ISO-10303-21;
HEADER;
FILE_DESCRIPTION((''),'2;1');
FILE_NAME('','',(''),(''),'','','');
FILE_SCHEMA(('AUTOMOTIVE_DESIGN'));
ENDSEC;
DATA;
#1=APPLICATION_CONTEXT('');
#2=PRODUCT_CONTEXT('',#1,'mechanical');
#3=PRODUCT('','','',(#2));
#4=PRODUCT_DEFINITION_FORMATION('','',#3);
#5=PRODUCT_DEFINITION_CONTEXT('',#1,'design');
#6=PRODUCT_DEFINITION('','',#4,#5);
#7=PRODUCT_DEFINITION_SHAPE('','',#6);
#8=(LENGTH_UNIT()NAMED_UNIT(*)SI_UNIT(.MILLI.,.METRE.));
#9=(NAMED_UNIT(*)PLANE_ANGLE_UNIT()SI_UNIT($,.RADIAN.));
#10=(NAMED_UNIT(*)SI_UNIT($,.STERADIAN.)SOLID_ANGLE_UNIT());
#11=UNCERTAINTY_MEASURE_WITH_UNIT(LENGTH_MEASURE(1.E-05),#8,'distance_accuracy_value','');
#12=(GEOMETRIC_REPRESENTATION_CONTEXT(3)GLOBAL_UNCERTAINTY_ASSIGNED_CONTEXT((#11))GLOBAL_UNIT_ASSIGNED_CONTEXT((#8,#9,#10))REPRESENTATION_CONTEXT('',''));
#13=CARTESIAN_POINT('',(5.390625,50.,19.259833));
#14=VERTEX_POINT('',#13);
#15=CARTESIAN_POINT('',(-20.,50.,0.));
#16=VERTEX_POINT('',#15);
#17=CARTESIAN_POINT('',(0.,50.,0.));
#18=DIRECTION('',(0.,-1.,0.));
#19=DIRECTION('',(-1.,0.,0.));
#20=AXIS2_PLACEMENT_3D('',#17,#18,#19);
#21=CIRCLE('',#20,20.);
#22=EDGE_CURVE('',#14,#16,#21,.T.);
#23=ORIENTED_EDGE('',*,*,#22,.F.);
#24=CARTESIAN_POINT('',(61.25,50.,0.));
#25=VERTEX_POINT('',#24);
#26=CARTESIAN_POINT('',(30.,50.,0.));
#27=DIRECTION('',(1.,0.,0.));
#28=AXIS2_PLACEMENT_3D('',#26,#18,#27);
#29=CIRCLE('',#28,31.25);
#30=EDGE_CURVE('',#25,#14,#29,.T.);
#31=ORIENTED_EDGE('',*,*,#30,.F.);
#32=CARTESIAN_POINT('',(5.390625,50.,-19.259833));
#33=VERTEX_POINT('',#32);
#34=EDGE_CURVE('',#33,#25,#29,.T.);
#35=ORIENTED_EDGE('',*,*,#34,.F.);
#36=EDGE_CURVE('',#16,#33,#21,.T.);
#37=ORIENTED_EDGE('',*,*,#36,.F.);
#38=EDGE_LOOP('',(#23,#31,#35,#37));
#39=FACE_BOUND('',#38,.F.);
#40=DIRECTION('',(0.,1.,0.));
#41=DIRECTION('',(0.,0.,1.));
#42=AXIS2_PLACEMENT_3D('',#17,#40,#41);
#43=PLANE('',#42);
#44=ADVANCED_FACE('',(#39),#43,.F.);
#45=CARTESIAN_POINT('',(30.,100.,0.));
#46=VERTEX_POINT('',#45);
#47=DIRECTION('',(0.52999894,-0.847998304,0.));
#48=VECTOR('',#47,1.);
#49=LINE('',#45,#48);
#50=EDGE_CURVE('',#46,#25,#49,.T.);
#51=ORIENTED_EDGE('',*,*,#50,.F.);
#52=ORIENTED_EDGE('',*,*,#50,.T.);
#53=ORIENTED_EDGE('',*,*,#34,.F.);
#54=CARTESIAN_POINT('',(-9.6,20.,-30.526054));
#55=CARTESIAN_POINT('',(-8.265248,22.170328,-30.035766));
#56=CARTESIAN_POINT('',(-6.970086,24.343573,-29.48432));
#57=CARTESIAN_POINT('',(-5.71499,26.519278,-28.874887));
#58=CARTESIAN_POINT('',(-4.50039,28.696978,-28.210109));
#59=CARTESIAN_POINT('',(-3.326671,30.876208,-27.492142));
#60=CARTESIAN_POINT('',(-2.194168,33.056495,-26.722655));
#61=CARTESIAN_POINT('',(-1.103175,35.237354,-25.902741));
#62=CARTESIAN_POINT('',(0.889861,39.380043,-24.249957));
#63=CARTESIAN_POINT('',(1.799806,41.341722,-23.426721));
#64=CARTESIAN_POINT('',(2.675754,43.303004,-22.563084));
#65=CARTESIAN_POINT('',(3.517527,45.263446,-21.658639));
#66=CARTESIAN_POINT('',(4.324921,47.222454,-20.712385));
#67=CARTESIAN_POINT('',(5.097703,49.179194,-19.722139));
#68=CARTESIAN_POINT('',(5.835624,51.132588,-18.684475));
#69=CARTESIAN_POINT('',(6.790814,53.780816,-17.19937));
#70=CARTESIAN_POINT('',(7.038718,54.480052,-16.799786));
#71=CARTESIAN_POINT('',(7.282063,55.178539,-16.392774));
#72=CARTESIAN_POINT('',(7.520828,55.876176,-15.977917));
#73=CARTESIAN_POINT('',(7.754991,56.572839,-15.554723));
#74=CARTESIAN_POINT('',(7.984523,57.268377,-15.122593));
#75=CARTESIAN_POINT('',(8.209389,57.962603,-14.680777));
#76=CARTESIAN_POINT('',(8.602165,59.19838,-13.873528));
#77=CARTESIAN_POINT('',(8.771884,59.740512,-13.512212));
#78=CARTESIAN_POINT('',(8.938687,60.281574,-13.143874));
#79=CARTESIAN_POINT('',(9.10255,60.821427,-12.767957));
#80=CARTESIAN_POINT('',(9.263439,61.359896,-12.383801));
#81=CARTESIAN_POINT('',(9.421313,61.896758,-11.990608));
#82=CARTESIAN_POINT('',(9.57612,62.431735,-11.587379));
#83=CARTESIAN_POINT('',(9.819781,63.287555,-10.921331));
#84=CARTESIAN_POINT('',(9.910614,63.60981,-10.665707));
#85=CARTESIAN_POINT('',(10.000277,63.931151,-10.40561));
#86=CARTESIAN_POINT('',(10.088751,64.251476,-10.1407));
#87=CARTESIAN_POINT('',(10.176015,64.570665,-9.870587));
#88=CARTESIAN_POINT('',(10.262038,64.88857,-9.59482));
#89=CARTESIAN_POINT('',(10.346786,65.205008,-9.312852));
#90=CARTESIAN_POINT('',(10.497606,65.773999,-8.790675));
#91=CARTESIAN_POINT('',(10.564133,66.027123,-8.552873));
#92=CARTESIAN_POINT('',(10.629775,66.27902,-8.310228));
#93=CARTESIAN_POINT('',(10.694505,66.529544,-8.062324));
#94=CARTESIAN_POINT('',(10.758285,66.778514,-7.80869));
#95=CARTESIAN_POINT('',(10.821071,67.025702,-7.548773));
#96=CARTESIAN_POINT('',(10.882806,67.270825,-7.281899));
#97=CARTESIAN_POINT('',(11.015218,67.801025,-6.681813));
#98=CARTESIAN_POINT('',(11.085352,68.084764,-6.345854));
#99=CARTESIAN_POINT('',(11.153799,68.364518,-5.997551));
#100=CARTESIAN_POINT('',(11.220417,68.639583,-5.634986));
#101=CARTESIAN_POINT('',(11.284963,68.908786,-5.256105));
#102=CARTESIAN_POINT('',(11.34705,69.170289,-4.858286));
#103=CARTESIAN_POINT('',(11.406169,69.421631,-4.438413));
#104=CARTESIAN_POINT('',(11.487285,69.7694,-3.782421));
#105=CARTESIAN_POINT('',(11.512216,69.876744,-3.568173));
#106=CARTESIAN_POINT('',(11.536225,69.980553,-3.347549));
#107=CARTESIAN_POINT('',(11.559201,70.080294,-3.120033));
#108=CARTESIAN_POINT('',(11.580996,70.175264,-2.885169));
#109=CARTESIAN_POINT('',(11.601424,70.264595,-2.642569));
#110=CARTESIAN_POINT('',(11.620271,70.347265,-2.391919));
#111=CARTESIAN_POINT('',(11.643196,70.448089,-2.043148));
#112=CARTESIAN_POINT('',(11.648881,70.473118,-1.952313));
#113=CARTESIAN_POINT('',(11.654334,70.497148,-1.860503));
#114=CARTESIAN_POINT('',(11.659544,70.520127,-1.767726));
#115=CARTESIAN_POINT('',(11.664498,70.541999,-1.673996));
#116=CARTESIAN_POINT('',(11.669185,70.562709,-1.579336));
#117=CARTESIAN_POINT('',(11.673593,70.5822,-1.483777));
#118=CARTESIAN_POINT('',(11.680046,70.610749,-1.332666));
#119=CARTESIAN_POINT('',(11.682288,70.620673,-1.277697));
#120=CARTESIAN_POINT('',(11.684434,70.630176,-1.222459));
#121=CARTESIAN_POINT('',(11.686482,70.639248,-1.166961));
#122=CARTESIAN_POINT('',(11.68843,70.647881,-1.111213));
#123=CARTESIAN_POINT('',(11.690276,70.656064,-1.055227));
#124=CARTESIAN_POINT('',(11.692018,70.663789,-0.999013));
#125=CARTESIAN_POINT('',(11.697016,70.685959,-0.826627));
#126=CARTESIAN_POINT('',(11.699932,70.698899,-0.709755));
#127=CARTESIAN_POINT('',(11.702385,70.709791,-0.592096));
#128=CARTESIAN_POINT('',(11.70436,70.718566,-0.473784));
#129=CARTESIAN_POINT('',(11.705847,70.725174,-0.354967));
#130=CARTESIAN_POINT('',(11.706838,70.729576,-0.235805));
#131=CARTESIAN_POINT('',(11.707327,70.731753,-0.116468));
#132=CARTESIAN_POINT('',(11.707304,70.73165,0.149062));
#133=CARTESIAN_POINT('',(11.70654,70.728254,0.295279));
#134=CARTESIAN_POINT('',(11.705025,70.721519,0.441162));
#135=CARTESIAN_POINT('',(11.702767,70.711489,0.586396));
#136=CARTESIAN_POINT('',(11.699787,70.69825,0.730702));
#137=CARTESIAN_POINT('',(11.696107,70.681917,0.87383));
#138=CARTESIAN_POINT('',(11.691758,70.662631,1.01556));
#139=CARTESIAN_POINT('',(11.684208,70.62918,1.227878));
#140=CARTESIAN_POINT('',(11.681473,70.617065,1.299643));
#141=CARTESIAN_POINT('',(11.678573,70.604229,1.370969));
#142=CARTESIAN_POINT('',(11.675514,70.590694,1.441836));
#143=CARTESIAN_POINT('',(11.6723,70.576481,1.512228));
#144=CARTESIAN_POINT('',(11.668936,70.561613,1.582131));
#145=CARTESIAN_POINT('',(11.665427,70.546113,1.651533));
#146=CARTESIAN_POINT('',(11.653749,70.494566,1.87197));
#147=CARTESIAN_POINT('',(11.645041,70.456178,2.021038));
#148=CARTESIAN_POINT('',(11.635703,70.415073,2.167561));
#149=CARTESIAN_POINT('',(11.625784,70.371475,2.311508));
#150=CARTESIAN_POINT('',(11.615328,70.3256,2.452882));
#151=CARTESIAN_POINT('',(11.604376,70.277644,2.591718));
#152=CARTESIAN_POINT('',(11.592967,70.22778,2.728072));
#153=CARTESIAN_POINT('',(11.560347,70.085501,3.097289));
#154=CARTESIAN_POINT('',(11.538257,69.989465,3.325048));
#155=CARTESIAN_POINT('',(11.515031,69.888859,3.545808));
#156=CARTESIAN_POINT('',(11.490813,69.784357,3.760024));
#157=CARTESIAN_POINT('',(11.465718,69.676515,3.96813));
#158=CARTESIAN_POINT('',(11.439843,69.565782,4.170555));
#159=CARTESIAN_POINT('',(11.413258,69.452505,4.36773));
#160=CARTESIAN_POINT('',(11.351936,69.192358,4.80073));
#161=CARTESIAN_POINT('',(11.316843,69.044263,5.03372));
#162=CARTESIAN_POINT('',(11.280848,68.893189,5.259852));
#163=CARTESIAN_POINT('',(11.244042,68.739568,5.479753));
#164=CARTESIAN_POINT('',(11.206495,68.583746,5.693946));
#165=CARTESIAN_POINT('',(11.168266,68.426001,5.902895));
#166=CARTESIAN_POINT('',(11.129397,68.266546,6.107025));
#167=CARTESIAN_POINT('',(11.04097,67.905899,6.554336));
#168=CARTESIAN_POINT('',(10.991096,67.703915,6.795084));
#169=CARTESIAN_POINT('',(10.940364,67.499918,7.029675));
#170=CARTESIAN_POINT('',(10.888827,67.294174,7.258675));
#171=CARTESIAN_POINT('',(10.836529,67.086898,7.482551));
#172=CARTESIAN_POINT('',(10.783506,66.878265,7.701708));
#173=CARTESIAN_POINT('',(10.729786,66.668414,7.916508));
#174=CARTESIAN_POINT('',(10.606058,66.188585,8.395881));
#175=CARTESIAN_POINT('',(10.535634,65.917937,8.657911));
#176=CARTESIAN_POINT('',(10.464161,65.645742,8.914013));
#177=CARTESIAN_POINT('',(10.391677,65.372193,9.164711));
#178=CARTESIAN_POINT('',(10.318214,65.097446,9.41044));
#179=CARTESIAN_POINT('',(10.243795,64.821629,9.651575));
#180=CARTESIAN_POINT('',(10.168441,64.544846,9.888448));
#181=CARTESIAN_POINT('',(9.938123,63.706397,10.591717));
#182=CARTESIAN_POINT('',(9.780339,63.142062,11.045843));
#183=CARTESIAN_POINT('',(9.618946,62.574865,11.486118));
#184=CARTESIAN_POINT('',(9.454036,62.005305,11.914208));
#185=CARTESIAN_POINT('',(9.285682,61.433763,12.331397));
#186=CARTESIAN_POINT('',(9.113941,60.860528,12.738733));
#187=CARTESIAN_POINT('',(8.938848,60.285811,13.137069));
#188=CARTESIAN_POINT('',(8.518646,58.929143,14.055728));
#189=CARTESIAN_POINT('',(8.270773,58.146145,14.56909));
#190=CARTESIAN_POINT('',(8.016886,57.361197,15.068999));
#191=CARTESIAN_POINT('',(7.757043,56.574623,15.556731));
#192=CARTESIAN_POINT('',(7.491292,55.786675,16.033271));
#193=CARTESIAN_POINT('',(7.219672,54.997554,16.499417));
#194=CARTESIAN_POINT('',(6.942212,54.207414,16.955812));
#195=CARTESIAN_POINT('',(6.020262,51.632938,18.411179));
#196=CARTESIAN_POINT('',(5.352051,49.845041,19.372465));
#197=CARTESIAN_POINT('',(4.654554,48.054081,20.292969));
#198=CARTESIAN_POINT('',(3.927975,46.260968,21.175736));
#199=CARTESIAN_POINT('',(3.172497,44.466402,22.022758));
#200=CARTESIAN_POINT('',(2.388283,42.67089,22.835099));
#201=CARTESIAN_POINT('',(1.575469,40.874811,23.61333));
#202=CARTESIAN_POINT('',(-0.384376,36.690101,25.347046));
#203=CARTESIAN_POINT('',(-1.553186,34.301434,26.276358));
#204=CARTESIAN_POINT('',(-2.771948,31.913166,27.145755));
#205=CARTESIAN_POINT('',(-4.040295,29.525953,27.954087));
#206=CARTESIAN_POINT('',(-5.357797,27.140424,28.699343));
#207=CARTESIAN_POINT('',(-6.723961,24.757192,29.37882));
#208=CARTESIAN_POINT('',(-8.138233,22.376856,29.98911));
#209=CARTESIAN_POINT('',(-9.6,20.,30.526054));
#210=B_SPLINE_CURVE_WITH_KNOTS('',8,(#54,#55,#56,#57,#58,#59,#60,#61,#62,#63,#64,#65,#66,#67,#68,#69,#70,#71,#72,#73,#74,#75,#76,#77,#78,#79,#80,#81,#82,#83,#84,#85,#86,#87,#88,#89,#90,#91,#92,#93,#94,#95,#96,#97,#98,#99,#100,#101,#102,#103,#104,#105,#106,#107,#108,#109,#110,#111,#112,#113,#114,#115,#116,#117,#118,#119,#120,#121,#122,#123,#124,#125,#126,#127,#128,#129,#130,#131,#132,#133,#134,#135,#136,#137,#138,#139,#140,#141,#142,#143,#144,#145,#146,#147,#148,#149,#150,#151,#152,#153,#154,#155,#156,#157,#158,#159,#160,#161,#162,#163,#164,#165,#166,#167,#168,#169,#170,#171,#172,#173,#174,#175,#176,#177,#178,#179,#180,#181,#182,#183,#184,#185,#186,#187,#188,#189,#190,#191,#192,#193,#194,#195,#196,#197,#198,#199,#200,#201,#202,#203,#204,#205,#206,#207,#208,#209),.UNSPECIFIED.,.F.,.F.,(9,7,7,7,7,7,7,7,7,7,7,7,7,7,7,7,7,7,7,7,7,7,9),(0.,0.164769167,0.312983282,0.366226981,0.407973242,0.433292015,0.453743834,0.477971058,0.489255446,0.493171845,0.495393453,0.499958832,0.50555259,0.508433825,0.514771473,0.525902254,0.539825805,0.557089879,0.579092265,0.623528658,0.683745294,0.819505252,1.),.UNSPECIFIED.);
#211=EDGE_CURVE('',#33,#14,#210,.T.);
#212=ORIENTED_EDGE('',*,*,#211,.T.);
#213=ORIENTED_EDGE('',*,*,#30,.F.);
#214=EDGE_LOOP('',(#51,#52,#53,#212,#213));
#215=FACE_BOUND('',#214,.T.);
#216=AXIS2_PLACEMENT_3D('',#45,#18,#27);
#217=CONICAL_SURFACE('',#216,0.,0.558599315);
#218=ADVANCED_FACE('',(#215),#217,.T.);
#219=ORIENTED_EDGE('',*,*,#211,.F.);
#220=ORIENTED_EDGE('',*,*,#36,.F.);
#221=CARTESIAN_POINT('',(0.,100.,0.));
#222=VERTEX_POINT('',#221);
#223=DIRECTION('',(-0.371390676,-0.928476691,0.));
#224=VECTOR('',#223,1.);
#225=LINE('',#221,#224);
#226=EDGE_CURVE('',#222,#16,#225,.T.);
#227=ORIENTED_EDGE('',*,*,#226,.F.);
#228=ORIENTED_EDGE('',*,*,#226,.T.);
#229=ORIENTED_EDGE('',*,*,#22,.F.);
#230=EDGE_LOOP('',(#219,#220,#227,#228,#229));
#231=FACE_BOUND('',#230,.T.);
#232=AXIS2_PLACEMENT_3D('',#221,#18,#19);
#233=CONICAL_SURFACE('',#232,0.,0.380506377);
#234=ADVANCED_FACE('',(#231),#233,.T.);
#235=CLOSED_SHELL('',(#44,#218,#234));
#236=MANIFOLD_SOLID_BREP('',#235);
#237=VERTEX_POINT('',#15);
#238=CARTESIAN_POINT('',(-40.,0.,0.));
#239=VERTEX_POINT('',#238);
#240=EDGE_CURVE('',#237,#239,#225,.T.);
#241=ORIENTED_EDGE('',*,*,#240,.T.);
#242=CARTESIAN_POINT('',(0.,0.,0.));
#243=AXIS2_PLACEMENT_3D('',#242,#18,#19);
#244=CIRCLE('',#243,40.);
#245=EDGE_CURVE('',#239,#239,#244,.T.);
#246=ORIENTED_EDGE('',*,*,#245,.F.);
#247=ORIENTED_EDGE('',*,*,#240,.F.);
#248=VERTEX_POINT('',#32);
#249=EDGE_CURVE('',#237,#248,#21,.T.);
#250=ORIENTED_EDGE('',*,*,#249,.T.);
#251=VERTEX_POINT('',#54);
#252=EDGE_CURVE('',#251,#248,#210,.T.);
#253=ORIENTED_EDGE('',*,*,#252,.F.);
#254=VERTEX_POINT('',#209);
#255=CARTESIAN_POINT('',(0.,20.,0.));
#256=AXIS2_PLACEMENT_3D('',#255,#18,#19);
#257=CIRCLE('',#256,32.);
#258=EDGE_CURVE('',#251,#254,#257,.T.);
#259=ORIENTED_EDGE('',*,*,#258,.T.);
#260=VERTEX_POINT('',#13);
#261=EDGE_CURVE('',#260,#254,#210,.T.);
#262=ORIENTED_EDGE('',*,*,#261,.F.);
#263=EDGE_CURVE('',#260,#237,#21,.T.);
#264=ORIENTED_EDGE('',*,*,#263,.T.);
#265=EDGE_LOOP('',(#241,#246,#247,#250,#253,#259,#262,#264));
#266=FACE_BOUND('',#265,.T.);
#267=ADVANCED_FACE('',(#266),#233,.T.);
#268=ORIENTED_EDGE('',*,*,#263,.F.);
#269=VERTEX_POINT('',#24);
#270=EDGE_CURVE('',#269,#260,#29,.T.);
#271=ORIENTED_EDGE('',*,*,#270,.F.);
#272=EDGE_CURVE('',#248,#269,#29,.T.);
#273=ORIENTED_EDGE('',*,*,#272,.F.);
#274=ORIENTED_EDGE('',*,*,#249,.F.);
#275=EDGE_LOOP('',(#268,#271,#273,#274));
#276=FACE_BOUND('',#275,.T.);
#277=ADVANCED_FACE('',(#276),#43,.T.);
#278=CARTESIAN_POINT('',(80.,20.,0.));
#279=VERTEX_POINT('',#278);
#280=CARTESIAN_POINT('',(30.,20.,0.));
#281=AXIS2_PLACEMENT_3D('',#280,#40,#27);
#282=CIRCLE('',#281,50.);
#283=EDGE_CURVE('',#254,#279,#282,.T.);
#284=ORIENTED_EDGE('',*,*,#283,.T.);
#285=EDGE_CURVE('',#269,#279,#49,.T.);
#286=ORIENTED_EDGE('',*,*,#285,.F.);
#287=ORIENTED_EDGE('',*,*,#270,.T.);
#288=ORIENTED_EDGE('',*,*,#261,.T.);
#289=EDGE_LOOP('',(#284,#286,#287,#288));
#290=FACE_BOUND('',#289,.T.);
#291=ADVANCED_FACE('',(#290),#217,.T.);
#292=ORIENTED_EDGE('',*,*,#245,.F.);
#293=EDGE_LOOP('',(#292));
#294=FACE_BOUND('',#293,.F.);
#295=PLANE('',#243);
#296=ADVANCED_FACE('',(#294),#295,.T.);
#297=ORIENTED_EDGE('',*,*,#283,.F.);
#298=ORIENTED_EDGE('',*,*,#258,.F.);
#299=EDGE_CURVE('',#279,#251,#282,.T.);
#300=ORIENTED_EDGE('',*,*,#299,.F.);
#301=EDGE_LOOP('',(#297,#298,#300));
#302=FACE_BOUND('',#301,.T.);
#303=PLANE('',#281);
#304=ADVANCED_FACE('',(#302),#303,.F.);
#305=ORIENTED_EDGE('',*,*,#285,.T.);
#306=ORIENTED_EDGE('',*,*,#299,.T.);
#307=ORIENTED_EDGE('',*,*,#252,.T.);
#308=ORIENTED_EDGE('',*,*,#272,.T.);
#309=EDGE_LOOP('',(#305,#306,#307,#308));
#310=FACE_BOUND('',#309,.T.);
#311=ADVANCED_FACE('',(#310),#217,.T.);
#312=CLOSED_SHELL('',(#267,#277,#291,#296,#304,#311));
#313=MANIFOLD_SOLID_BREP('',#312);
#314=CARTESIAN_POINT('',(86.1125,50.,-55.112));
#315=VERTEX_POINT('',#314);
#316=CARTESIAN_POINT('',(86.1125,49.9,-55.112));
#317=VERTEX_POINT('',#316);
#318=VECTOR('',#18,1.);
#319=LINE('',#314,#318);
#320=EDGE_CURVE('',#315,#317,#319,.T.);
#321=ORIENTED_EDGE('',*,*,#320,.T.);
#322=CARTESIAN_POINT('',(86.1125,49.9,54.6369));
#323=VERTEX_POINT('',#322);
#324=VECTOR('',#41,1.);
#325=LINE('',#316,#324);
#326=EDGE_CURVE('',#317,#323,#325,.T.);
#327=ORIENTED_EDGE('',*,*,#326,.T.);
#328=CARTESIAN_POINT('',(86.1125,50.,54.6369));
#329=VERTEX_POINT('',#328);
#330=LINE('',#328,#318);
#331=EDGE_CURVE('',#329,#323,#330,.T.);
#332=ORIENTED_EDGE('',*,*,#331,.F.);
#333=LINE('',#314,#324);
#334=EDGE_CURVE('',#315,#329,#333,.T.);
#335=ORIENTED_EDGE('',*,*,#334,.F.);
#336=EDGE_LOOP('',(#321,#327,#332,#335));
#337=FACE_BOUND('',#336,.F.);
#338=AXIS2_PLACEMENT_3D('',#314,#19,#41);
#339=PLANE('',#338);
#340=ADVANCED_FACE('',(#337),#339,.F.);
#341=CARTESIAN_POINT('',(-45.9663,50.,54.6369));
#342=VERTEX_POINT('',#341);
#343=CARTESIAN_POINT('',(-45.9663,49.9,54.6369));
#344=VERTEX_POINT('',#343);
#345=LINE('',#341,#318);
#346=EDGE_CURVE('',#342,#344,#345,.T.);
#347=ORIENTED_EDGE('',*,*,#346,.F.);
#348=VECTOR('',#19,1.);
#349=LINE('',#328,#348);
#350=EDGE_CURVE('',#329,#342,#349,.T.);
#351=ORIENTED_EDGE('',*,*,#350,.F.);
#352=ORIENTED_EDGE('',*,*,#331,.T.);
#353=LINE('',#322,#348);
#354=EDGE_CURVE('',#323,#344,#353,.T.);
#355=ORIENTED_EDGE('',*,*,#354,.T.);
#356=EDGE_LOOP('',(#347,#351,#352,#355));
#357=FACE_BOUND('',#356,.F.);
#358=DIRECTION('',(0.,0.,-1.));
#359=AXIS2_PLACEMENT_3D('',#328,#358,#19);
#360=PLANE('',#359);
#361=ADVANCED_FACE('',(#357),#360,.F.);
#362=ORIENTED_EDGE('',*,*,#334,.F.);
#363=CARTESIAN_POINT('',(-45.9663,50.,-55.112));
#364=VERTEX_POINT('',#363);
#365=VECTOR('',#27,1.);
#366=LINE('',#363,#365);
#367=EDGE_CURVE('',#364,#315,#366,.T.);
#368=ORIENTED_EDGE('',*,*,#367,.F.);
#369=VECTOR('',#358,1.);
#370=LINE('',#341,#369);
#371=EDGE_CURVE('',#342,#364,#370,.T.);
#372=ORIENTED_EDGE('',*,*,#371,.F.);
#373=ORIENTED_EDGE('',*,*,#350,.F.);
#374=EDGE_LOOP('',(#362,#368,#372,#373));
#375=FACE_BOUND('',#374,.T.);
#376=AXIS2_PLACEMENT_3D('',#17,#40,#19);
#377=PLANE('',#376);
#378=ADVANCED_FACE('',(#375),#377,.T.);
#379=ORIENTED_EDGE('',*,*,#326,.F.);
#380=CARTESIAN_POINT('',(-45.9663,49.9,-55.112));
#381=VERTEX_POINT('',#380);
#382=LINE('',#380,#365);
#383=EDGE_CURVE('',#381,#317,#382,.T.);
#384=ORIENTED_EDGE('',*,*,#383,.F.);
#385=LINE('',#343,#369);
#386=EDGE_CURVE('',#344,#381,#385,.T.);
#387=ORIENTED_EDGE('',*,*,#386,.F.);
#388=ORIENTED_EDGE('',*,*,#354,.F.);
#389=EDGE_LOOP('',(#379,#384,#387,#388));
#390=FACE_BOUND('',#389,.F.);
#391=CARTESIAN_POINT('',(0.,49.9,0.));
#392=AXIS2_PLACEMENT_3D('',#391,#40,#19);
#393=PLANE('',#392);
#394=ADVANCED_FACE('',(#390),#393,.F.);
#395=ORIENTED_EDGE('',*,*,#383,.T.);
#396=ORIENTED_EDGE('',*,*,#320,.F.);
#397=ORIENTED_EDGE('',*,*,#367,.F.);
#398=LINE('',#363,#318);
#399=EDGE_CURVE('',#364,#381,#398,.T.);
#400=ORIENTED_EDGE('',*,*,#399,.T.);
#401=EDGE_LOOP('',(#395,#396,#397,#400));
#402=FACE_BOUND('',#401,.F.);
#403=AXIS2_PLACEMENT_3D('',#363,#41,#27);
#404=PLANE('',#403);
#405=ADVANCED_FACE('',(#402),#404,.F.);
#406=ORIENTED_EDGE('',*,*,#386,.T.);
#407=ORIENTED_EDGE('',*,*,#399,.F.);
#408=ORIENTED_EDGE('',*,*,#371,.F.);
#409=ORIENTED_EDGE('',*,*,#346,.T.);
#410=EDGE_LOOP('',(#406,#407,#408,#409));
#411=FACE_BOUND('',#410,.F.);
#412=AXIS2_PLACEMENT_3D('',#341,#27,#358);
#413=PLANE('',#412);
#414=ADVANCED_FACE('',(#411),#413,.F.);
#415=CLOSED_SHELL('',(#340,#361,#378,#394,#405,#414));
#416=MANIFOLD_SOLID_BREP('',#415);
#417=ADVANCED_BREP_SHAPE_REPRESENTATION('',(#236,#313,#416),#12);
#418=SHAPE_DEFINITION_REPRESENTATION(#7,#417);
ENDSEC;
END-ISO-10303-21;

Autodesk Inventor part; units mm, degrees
ref_plane "YZ Plane" through (0, 0, 0) normal (1, 0, 0) x (0, 1, 0)
ref_plane "XY Plane" through (0, 0, 0) normal (0, 0, 1) x (1, 0, 0)
sketch "Эскиз2" plane through (0, 0, 0) normal (0, 0, 1) x (1, 0, 0)
  line L0 (0, 0) -> (40, 0)
  line L1 (0, 0) -> (-40, 0)
  line L2 (0, 100) -> (-40, 0)
  line L3 (0, 100) -> (40, 0)
  line L4 (0, 100) -> (0, 0)
  dimension "d0" = 40
  dimension "d1" = 40
  dimension "d2" = 100
revolve "Вращение1" add sketch "Эскиз2" angle 360 about axis through (0, 100, 0) along (0, -1, 0) contours L1 L2 L4
sketch "Эскиз3" plane through (0, 0, 0) normal (0, 0, 1) x (1, 0, 0)
  line L0 (-40, 0) -> (40, 0) projected
  line L1 (0, 0) -> (30, 0)
  line L2 (30, 0) -> (30, 20)
  line L3 (30, 20) -> (80, 20)
  line L4 (30, 20) -> (-20, 20)
  line L5 (30, 20) -> (30, 100)
  line L6 (30, 100) -> (80, 20)
  line L7 (30, 100) -> (-20, 20)
  point P0 (0, 100)
  dimension "d4" = 30
  dimension "d5" = 20
  dimension "d6" = 50
  dimension "d7" = 50
  dimension "d8" = 80
revolve "Вращение2" add sketch "Эскиз3" angle 360 about axis through (30, 20, 0) along (0, 1, 0) contours L5 L6 L3
ref_plane "РабПлоскость1" through (0, 50, 0) normal (0, 1, 0) x (-1, 0, 0)
sketch "Эскиз5" plane through (0, 50, 0) normal (0, 1, 0) x (-1, 0, 0)
  line L0 (-86.1125, -55.112) -> (-86.1125, 54.6369)
  line L1 (-86.1125, 54.6369) -> (45.9663, 54.6369)
  line L2 (45.9663, 54.6369) -> (45.9663, -55.112)
  line L3 (45.9663, -55.112) -> (-86.1125, -55.112)
  circle A0 centre (0, 0) radius 40 projected
  arc A1 (9.6, 30.5261) -> (9.6, -30.5261) centre (-30, 0) ccw projected
  arc A2 (9.6, 30.5261) -> (9.6, -30.5261) centre (0, 0) ccw projected
  circle A3 centre (0, 0) radius 40 projected
extrude "Выдавливание2" add sketch "Эскиз5" against normal blind 0.1 separate body contours L0 L1 L2 L3 | A0 A1 A2 | A1 A2 A0 | A0 A1
split body "Разделение1" result two bodies by plane through (0, 50, 0) normal (0, 1, 0) bodies 1 first body at (16.8095, 67.609, -14.5712)
properties part number "Пересечение поверхностей"
